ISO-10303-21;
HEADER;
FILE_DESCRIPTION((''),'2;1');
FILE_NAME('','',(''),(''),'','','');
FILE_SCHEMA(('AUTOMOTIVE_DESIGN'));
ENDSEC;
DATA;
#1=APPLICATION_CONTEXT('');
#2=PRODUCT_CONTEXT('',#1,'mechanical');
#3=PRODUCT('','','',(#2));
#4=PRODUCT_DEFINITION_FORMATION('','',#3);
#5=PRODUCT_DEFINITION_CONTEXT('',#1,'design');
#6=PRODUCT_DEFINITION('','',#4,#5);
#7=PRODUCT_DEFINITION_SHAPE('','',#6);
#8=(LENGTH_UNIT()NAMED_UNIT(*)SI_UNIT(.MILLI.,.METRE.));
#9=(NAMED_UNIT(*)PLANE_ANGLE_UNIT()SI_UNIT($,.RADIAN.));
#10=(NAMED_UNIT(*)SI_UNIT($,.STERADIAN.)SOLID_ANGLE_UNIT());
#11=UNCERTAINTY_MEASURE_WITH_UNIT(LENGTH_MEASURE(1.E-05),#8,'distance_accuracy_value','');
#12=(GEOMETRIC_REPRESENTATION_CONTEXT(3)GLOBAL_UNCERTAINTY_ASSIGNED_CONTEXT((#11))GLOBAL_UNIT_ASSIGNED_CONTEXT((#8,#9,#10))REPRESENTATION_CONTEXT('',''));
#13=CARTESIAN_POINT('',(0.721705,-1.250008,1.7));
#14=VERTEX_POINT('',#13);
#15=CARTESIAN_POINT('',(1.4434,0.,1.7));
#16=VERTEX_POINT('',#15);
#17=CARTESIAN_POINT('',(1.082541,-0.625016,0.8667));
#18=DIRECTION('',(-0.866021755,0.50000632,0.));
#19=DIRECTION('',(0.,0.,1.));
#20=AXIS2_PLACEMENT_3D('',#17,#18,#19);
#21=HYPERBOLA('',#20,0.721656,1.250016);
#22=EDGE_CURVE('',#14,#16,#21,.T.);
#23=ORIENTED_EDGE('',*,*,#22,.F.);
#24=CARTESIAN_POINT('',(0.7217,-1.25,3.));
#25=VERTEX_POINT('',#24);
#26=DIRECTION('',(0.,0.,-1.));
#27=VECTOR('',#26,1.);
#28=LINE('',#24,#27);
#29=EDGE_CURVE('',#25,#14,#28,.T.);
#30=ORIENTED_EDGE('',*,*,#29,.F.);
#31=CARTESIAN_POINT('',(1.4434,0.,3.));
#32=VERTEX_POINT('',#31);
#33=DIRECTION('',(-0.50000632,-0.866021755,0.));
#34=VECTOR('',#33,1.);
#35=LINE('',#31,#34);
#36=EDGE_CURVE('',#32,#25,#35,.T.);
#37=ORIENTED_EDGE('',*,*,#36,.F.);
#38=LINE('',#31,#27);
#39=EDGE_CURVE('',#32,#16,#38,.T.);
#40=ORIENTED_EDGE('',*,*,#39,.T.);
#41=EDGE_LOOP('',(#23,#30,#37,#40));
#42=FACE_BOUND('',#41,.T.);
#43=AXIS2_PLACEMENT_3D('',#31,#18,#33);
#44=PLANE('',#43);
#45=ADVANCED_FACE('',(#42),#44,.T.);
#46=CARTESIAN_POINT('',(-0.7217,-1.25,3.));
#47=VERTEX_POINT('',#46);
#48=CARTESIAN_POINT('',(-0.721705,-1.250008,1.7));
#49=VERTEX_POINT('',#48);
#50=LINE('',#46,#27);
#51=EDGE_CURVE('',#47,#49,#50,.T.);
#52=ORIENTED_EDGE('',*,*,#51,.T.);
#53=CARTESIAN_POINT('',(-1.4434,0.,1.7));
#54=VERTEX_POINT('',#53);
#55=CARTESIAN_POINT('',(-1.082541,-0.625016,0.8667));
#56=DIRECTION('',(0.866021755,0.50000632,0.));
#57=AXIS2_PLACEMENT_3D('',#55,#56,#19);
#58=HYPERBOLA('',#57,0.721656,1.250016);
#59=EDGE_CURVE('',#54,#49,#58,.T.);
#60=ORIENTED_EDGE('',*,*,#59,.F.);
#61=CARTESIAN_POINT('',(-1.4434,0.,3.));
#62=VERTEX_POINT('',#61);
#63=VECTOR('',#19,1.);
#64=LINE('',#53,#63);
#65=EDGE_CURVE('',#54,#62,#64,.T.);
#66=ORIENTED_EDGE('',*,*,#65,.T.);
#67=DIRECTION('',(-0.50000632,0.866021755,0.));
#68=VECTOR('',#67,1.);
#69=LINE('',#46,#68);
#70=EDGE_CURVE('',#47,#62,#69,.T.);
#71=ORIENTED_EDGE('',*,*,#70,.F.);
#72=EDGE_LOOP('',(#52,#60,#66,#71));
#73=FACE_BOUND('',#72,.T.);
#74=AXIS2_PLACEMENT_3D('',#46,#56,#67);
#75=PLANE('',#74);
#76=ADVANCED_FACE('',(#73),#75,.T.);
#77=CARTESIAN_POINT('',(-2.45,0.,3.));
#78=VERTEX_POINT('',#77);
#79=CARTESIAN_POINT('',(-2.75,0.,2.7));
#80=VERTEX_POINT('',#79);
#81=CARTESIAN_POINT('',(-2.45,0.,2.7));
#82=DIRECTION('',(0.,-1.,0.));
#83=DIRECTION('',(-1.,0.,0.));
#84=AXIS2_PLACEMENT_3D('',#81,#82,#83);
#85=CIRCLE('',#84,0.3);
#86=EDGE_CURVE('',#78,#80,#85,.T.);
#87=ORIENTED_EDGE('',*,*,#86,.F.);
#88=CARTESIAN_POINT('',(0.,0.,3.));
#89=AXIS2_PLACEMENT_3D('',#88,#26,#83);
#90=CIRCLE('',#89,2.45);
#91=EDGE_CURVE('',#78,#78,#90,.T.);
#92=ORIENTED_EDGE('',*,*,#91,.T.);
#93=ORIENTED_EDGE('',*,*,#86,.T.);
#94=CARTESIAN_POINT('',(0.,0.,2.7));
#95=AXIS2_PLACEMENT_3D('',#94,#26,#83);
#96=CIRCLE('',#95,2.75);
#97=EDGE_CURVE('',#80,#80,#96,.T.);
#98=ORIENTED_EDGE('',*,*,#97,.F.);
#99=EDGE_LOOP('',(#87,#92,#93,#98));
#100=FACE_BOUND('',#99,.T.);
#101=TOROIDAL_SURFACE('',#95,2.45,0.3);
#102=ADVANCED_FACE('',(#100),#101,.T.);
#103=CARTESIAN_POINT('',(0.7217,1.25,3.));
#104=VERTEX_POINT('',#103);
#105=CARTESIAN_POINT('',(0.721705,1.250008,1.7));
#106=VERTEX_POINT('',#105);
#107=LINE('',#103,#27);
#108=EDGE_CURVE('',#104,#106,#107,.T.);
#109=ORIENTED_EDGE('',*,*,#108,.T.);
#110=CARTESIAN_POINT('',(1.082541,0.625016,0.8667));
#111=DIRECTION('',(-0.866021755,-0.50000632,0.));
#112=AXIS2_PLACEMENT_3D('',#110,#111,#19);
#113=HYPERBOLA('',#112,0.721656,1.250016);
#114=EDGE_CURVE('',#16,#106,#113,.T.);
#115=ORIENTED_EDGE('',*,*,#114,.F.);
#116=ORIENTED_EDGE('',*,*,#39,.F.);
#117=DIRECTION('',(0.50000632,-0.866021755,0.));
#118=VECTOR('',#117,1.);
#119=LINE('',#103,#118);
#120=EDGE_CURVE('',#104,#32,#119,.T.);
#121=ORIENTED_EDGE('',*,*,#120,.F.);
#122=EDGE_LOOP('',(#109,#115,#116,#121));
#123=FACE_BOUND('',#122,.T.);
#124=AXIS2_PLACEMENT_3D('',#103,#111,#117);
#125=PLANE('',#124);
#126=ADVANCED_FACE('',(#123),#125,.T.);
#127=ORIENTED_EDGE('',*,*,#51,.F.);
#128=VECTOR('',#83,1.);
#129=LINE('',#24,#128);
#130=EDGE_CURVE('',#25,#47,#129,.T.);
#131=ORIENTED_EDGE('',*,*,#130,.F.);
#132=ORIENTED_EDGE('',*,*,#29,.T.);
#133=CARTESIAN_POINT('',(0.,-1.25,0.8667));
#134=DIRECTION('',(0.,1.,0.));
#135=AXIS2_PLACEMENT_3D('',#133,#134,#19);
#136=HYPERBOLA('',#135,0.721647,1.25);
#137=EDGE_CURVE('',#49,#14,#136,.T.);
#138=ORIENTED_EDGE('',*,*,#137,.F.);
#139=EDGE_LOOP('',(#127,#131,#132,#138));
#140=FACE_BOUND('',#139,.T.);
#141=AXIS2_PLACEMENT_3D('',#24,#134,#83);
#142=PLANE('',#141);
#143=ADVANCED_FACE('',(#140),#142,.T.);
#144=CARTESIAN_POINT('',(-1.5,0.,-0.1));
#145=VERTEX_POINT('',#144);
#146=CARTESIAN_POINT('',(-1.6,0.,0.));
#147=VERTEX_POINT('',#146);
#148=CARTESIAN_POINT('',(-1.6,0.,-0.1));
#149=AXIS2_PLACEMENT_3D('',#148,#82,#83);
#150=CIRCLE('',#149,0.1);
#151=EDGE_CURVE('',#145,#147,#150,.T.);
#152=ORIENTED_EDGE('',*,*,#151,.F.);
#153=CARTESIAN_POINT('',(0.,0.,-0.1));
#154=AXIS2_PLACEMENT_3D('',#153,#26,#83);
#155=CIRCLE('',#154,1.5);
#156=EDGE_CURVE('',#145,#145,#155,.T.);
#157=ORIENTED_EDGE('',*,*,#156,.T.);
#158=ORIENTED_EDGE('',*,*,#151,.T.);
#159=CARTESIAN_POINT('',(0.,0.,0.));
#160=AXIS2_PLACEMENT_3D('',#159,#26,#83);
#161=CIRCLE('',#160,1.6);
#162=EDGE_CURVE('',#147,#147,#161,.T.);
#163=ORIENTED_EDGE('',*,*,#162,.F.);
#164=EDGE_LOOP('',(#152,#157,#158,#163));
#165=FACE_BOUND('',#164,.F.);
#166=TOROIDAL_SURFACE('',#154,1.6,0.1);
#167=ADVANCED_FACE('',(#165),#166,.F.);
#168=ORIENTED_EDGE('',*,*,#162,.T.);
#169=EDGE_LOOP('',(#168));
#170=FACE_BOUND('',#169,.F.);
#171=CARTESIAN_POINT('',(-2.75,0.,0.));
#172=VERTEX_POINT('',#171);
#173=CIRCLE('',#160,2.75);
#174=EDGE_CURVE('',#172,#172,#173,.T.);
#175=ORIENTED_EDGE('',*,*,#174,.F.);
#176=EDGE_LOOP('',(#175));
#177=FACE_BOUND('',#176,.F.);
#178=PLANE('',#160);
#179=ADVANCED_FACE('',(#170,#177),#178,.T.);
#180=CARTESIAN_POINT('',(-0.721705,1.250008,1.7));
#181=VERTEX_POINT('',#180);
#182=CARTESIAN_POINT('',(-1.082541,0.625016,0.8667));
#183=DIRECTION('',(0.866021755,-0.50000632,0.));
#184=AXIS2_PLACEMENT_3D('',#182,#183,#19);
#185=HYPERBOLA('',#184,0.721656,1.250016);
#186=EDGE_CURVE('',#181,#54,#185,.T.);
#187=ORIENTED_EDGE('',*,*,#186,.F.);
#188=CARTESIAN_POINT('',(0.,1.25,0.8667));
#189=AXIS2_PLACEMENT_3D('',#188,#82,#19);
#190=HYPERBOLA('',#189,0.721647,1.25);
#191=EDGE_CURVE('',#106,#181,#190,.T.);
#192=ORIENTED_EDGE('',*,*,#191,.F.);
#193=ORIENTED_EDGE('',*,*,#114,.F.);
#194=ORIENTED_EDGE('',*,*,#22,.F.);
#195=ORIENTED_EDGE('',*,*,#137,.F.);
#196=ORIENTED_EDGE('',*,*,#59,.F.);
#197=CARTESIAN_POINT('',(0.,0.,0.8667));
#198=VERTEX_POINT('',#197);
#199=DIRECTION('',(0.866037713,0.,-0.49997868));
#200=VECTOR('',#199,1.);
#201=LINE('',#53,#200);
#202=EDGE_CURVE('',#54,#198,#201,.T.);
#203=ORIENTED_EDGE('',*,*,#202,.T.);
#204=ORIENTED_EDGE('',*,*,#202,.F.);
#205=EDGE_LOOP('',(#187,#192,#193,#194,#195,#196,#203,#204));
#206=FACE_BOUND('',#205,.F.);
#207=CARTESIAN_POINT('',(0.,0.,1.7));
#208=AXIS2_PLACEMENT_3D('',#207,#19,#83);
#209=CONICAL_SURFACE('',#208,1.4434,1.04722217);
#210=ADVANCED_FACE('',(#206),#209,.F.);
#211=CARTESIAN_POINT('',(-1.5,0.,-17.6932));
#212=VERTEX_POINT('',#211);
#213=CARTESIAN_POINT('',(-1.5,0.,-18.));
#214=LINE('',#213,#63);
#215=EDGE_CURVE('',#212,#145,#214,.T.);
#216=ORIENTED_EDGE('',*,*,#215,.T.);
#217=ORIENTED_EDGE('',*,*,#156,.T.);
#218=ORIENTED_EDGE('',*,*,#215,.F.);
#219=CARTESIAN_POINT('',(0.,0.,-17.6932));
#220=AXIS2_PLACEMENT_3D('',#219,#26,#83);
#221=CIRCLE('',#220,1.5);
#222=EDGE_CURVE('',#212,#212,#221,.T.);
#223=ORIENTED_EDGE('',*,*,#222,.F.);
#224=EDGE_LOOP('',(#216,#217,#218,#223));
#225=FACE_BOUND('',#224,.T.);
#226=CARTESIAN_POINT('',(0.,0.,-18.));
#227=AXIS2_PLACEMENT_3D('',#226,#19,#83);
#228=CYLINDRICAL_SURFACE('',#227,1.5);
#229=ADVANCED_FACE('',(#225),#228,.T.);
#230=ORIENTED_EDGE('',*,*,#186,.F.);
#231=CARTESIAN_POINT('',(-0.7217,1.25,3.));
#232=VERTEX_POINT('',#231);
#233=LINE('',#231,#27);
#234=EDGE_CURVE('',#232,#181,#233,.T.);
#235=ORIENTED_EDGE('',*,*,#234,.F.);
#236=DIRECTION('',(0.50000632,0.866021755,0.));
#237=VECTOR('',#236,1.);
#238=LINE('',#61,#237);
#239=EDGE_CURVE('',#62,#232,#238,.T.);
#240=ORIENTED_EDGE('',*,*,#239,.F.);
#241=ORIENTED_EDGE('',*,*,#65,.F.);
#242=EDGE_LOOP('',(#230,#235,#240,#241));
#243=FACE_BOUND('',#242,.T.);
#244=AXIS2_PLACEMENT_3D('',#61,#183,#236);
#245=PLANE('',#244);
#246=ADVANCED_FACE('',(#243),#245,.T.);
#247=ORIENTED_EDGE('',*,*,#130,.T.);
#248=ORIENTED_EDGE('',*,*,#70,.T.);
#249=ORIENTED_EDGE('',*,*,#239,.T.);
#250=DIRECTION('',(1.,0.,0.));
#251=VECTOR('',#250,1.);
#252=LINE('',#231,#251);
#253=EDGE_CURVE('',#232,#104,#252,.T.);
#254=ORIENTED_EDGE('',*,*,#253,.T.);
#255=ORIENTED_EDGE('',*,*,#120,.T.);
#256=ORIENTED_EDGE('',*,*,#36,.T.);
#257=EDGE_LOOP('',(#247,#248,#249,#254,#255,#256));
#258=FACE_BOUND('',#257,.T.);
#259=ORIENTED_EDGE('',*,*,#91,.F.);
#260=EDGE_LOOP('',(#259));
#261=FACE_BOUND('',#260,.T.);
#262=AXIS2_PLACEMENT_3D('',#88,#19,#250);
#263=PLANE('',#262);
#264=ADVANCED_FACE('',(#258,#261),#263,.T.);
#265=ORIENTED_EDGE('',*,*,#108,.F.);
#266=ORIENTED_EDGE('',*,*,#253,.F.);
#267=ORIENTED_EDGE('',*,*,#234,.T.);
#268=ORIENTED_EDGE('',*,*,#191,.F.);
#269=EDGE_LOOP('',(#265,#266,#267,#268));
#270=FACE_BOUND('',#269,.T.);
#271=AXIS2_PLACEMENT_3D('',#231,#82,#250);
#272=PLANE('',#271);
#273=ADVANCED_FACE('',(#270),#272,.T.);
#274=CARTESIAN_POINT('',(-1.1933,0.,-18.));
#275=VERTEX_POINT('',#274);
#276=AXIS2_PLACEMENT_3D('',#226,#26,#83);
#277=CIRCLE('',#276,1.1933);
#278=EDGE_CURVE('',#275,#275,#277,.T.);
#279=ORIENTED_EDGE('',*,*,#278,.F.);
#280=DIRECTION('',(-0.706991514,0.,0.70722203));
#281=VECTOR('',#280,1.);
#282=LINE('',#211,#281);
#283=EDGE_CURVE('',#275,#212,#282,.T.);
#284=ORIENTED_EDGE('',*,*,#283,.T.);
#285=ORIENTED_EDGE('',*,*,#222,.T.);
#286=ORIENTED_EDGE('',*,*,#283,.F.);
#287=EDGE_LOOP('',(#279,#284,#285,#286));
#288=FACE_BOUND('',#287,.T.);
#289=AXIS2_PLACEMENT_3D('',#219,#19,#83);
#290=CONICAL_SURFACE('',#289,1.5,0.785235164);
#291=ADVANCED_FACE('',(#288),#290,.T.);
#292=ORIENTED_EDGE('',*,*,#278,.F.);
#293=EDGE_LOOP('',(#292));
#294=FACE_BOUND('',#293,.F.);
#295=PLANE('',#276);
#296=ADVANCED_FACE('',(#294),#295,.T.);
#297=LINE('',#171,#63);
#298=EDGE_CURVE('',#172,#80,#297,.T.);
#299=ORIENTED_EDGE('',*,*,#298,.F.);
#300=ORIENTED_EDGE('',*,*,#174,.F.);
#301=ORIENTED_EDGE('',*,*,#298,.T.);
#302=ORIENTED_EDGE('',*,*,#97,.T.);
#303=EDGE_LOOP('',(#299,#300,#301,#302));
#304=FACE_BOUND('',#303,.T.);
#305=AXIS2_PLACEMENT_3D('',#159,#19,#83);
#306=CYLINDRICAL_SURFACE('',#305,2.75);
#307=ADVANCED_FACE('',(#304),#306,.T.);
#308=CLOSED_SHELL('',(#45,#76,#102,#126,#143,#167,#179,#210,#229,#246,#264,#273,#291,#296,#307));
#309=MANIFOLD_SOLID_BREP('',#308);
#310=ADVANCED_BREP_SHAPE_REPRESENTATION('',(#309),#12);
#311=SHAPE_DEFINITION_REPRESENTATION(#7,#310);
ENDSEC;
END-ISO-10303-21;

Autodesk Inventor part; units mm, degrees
ref_plane "YZ Plane" through (0, 0, 0) normal (1, 0, 0) x (0, 1, 0)
ref_plane "XZ Plane" through (0, 0, 0) normal (0, 1, 0) x (-1, 0, 0)
ref_plane "XY Plane" through (0, 0, 0) normal (0, 0, 1) x (1, 0, 0)
sketch "スケッチ1" plane through (0, 0, 0) normal (0, 1, 0) x (-1, 0, 0)
  line L0 (0, -18) -> (1.5, -18)
  line L1 (1.5, -18) -> (1.5, 0)
  line L2 (1.5, 0) -> (2.75, 0)
  line L3 (2.75, 0) -> (2.75, 3)
  line L4 (2.75, 3) -> (1.4434, 3)
  line L5 (1.4434, 1.7) -> (0, 0.8667)
  line L6 (0, 0.8667) -> (0, -18)
  line L7 (0, -22.2) -> (0, 7.2) projected
  line L8 (1.4434, 1.7) -> (1.4434, 3)
  point P0 (0, 0)
  dimension "nominaldiam" = 3
  dimension "nominallength" = 18
  dimension "headdiam" = 5.5
  dimension "headheight" = 3
  dimension "socketdiam" = 2.8868
  dimension "socketdepth" = 1.3
  dimension "socketangle" = 60
revolve "ボディ" add sketch "スケッチ1" angle 360 about axis through (0, 0, 0.8667) along (0, 0, -1)
sketch "スケッチ2" plane through (0, 0, 3) normal (0, 0, 1) x (1, 0, 0)
  line L0 (0.7217, -1.25) -> (-0.7217, -1.25)
  line L1 (-0.7217, -1.25) -> (-1.4434, 0)
  line L2 (-1.4434, 0) -> (-0.7217, 1.25)
  line L3 (-0.7217, 1.25) -> (0.7217, 1.25)
  line L4 (0.7217, 1.25) -> (1.4434, 0)
  line L5 (1.4434, 0) -> (0.7217, -1.25)
  circle A0 centre (0, 0) radius 1.4434 projected
  point P0 (0, 0)
  point P1 (0, 0)
  point P2 (0.7217, -1.25)
  point P3 (0.7217, -1.25)
  point P4 (0.7217, 1.25)
  point P5 (0.7217, 1.25)
  point P6 (-0.7217, 1.25)
  point P7 (-0.7217, 1.25)
  point P8 (-1.4434, 0)
  point P9 (-1.4434, 0)
  point P10 (-0.7217, -1.25)
  point P11 (-0.7217, -1.25)
extrude "六角穴" add sketch "スケッチ2" against normal up to next contours A0 L0 | L5 A0 | A0 L1 | L4 A0 | A0 L2 | L3 A0
fillet "フィレット1" radius 0.3 1 edges at (2.75, 0, 3)
thread "ねじ1" size "M3x0.5" class "6g" standard "ISO Metric profile" length 16.5
chamfer "面取り1" distance 0.3067 distance2 0.3068 1 edges at (1.5, 0, -18) measured on face at (0.2675, -0.5474, -18)
fillet "フィレット2" radius 0.1 1 edges at (1.5, 0, 0)
equation "\"headfilletrad\" = HeadFilletRad"
equation "\"threadlength\" = ThreadLength"
equation "\"chamfer1\" = 0.61345 * Pitch"
equation "\"rrad\" = RRad"
equation "\"nominaldiam\" = NominalDiam"
equation "\"nominallength\" = NominalLength"
equation "\"headdiam\" = HeadDiam"
equation "\"headheight\" = HeadHeight"
equation "\"socketdiam\" = 1.1547 * SocketWidth"
equation "\"socketdepth\" = SocketDepth"
equation "\"NominalDiam\" = 3"
equation "\"NominalLength\" = 18"
equation "\"ThreadLength\" = 16.5"
equation "\"HeadDiam\" = 5.5"
equation "\"HeadHeight\" = 3"
equation "\"SocketWidth\" = 2.5"
equation "\"SocketDepth\" = 1.3"
equation "\"HeadFilletRad\" = 0.3"
equation "\"RRad\" = 0.1"
equation "\"Pitch\" = 0.5"
properties part number "HexSocketCapScrew_M3x0.5-18" material "鋼、軟鋼"
